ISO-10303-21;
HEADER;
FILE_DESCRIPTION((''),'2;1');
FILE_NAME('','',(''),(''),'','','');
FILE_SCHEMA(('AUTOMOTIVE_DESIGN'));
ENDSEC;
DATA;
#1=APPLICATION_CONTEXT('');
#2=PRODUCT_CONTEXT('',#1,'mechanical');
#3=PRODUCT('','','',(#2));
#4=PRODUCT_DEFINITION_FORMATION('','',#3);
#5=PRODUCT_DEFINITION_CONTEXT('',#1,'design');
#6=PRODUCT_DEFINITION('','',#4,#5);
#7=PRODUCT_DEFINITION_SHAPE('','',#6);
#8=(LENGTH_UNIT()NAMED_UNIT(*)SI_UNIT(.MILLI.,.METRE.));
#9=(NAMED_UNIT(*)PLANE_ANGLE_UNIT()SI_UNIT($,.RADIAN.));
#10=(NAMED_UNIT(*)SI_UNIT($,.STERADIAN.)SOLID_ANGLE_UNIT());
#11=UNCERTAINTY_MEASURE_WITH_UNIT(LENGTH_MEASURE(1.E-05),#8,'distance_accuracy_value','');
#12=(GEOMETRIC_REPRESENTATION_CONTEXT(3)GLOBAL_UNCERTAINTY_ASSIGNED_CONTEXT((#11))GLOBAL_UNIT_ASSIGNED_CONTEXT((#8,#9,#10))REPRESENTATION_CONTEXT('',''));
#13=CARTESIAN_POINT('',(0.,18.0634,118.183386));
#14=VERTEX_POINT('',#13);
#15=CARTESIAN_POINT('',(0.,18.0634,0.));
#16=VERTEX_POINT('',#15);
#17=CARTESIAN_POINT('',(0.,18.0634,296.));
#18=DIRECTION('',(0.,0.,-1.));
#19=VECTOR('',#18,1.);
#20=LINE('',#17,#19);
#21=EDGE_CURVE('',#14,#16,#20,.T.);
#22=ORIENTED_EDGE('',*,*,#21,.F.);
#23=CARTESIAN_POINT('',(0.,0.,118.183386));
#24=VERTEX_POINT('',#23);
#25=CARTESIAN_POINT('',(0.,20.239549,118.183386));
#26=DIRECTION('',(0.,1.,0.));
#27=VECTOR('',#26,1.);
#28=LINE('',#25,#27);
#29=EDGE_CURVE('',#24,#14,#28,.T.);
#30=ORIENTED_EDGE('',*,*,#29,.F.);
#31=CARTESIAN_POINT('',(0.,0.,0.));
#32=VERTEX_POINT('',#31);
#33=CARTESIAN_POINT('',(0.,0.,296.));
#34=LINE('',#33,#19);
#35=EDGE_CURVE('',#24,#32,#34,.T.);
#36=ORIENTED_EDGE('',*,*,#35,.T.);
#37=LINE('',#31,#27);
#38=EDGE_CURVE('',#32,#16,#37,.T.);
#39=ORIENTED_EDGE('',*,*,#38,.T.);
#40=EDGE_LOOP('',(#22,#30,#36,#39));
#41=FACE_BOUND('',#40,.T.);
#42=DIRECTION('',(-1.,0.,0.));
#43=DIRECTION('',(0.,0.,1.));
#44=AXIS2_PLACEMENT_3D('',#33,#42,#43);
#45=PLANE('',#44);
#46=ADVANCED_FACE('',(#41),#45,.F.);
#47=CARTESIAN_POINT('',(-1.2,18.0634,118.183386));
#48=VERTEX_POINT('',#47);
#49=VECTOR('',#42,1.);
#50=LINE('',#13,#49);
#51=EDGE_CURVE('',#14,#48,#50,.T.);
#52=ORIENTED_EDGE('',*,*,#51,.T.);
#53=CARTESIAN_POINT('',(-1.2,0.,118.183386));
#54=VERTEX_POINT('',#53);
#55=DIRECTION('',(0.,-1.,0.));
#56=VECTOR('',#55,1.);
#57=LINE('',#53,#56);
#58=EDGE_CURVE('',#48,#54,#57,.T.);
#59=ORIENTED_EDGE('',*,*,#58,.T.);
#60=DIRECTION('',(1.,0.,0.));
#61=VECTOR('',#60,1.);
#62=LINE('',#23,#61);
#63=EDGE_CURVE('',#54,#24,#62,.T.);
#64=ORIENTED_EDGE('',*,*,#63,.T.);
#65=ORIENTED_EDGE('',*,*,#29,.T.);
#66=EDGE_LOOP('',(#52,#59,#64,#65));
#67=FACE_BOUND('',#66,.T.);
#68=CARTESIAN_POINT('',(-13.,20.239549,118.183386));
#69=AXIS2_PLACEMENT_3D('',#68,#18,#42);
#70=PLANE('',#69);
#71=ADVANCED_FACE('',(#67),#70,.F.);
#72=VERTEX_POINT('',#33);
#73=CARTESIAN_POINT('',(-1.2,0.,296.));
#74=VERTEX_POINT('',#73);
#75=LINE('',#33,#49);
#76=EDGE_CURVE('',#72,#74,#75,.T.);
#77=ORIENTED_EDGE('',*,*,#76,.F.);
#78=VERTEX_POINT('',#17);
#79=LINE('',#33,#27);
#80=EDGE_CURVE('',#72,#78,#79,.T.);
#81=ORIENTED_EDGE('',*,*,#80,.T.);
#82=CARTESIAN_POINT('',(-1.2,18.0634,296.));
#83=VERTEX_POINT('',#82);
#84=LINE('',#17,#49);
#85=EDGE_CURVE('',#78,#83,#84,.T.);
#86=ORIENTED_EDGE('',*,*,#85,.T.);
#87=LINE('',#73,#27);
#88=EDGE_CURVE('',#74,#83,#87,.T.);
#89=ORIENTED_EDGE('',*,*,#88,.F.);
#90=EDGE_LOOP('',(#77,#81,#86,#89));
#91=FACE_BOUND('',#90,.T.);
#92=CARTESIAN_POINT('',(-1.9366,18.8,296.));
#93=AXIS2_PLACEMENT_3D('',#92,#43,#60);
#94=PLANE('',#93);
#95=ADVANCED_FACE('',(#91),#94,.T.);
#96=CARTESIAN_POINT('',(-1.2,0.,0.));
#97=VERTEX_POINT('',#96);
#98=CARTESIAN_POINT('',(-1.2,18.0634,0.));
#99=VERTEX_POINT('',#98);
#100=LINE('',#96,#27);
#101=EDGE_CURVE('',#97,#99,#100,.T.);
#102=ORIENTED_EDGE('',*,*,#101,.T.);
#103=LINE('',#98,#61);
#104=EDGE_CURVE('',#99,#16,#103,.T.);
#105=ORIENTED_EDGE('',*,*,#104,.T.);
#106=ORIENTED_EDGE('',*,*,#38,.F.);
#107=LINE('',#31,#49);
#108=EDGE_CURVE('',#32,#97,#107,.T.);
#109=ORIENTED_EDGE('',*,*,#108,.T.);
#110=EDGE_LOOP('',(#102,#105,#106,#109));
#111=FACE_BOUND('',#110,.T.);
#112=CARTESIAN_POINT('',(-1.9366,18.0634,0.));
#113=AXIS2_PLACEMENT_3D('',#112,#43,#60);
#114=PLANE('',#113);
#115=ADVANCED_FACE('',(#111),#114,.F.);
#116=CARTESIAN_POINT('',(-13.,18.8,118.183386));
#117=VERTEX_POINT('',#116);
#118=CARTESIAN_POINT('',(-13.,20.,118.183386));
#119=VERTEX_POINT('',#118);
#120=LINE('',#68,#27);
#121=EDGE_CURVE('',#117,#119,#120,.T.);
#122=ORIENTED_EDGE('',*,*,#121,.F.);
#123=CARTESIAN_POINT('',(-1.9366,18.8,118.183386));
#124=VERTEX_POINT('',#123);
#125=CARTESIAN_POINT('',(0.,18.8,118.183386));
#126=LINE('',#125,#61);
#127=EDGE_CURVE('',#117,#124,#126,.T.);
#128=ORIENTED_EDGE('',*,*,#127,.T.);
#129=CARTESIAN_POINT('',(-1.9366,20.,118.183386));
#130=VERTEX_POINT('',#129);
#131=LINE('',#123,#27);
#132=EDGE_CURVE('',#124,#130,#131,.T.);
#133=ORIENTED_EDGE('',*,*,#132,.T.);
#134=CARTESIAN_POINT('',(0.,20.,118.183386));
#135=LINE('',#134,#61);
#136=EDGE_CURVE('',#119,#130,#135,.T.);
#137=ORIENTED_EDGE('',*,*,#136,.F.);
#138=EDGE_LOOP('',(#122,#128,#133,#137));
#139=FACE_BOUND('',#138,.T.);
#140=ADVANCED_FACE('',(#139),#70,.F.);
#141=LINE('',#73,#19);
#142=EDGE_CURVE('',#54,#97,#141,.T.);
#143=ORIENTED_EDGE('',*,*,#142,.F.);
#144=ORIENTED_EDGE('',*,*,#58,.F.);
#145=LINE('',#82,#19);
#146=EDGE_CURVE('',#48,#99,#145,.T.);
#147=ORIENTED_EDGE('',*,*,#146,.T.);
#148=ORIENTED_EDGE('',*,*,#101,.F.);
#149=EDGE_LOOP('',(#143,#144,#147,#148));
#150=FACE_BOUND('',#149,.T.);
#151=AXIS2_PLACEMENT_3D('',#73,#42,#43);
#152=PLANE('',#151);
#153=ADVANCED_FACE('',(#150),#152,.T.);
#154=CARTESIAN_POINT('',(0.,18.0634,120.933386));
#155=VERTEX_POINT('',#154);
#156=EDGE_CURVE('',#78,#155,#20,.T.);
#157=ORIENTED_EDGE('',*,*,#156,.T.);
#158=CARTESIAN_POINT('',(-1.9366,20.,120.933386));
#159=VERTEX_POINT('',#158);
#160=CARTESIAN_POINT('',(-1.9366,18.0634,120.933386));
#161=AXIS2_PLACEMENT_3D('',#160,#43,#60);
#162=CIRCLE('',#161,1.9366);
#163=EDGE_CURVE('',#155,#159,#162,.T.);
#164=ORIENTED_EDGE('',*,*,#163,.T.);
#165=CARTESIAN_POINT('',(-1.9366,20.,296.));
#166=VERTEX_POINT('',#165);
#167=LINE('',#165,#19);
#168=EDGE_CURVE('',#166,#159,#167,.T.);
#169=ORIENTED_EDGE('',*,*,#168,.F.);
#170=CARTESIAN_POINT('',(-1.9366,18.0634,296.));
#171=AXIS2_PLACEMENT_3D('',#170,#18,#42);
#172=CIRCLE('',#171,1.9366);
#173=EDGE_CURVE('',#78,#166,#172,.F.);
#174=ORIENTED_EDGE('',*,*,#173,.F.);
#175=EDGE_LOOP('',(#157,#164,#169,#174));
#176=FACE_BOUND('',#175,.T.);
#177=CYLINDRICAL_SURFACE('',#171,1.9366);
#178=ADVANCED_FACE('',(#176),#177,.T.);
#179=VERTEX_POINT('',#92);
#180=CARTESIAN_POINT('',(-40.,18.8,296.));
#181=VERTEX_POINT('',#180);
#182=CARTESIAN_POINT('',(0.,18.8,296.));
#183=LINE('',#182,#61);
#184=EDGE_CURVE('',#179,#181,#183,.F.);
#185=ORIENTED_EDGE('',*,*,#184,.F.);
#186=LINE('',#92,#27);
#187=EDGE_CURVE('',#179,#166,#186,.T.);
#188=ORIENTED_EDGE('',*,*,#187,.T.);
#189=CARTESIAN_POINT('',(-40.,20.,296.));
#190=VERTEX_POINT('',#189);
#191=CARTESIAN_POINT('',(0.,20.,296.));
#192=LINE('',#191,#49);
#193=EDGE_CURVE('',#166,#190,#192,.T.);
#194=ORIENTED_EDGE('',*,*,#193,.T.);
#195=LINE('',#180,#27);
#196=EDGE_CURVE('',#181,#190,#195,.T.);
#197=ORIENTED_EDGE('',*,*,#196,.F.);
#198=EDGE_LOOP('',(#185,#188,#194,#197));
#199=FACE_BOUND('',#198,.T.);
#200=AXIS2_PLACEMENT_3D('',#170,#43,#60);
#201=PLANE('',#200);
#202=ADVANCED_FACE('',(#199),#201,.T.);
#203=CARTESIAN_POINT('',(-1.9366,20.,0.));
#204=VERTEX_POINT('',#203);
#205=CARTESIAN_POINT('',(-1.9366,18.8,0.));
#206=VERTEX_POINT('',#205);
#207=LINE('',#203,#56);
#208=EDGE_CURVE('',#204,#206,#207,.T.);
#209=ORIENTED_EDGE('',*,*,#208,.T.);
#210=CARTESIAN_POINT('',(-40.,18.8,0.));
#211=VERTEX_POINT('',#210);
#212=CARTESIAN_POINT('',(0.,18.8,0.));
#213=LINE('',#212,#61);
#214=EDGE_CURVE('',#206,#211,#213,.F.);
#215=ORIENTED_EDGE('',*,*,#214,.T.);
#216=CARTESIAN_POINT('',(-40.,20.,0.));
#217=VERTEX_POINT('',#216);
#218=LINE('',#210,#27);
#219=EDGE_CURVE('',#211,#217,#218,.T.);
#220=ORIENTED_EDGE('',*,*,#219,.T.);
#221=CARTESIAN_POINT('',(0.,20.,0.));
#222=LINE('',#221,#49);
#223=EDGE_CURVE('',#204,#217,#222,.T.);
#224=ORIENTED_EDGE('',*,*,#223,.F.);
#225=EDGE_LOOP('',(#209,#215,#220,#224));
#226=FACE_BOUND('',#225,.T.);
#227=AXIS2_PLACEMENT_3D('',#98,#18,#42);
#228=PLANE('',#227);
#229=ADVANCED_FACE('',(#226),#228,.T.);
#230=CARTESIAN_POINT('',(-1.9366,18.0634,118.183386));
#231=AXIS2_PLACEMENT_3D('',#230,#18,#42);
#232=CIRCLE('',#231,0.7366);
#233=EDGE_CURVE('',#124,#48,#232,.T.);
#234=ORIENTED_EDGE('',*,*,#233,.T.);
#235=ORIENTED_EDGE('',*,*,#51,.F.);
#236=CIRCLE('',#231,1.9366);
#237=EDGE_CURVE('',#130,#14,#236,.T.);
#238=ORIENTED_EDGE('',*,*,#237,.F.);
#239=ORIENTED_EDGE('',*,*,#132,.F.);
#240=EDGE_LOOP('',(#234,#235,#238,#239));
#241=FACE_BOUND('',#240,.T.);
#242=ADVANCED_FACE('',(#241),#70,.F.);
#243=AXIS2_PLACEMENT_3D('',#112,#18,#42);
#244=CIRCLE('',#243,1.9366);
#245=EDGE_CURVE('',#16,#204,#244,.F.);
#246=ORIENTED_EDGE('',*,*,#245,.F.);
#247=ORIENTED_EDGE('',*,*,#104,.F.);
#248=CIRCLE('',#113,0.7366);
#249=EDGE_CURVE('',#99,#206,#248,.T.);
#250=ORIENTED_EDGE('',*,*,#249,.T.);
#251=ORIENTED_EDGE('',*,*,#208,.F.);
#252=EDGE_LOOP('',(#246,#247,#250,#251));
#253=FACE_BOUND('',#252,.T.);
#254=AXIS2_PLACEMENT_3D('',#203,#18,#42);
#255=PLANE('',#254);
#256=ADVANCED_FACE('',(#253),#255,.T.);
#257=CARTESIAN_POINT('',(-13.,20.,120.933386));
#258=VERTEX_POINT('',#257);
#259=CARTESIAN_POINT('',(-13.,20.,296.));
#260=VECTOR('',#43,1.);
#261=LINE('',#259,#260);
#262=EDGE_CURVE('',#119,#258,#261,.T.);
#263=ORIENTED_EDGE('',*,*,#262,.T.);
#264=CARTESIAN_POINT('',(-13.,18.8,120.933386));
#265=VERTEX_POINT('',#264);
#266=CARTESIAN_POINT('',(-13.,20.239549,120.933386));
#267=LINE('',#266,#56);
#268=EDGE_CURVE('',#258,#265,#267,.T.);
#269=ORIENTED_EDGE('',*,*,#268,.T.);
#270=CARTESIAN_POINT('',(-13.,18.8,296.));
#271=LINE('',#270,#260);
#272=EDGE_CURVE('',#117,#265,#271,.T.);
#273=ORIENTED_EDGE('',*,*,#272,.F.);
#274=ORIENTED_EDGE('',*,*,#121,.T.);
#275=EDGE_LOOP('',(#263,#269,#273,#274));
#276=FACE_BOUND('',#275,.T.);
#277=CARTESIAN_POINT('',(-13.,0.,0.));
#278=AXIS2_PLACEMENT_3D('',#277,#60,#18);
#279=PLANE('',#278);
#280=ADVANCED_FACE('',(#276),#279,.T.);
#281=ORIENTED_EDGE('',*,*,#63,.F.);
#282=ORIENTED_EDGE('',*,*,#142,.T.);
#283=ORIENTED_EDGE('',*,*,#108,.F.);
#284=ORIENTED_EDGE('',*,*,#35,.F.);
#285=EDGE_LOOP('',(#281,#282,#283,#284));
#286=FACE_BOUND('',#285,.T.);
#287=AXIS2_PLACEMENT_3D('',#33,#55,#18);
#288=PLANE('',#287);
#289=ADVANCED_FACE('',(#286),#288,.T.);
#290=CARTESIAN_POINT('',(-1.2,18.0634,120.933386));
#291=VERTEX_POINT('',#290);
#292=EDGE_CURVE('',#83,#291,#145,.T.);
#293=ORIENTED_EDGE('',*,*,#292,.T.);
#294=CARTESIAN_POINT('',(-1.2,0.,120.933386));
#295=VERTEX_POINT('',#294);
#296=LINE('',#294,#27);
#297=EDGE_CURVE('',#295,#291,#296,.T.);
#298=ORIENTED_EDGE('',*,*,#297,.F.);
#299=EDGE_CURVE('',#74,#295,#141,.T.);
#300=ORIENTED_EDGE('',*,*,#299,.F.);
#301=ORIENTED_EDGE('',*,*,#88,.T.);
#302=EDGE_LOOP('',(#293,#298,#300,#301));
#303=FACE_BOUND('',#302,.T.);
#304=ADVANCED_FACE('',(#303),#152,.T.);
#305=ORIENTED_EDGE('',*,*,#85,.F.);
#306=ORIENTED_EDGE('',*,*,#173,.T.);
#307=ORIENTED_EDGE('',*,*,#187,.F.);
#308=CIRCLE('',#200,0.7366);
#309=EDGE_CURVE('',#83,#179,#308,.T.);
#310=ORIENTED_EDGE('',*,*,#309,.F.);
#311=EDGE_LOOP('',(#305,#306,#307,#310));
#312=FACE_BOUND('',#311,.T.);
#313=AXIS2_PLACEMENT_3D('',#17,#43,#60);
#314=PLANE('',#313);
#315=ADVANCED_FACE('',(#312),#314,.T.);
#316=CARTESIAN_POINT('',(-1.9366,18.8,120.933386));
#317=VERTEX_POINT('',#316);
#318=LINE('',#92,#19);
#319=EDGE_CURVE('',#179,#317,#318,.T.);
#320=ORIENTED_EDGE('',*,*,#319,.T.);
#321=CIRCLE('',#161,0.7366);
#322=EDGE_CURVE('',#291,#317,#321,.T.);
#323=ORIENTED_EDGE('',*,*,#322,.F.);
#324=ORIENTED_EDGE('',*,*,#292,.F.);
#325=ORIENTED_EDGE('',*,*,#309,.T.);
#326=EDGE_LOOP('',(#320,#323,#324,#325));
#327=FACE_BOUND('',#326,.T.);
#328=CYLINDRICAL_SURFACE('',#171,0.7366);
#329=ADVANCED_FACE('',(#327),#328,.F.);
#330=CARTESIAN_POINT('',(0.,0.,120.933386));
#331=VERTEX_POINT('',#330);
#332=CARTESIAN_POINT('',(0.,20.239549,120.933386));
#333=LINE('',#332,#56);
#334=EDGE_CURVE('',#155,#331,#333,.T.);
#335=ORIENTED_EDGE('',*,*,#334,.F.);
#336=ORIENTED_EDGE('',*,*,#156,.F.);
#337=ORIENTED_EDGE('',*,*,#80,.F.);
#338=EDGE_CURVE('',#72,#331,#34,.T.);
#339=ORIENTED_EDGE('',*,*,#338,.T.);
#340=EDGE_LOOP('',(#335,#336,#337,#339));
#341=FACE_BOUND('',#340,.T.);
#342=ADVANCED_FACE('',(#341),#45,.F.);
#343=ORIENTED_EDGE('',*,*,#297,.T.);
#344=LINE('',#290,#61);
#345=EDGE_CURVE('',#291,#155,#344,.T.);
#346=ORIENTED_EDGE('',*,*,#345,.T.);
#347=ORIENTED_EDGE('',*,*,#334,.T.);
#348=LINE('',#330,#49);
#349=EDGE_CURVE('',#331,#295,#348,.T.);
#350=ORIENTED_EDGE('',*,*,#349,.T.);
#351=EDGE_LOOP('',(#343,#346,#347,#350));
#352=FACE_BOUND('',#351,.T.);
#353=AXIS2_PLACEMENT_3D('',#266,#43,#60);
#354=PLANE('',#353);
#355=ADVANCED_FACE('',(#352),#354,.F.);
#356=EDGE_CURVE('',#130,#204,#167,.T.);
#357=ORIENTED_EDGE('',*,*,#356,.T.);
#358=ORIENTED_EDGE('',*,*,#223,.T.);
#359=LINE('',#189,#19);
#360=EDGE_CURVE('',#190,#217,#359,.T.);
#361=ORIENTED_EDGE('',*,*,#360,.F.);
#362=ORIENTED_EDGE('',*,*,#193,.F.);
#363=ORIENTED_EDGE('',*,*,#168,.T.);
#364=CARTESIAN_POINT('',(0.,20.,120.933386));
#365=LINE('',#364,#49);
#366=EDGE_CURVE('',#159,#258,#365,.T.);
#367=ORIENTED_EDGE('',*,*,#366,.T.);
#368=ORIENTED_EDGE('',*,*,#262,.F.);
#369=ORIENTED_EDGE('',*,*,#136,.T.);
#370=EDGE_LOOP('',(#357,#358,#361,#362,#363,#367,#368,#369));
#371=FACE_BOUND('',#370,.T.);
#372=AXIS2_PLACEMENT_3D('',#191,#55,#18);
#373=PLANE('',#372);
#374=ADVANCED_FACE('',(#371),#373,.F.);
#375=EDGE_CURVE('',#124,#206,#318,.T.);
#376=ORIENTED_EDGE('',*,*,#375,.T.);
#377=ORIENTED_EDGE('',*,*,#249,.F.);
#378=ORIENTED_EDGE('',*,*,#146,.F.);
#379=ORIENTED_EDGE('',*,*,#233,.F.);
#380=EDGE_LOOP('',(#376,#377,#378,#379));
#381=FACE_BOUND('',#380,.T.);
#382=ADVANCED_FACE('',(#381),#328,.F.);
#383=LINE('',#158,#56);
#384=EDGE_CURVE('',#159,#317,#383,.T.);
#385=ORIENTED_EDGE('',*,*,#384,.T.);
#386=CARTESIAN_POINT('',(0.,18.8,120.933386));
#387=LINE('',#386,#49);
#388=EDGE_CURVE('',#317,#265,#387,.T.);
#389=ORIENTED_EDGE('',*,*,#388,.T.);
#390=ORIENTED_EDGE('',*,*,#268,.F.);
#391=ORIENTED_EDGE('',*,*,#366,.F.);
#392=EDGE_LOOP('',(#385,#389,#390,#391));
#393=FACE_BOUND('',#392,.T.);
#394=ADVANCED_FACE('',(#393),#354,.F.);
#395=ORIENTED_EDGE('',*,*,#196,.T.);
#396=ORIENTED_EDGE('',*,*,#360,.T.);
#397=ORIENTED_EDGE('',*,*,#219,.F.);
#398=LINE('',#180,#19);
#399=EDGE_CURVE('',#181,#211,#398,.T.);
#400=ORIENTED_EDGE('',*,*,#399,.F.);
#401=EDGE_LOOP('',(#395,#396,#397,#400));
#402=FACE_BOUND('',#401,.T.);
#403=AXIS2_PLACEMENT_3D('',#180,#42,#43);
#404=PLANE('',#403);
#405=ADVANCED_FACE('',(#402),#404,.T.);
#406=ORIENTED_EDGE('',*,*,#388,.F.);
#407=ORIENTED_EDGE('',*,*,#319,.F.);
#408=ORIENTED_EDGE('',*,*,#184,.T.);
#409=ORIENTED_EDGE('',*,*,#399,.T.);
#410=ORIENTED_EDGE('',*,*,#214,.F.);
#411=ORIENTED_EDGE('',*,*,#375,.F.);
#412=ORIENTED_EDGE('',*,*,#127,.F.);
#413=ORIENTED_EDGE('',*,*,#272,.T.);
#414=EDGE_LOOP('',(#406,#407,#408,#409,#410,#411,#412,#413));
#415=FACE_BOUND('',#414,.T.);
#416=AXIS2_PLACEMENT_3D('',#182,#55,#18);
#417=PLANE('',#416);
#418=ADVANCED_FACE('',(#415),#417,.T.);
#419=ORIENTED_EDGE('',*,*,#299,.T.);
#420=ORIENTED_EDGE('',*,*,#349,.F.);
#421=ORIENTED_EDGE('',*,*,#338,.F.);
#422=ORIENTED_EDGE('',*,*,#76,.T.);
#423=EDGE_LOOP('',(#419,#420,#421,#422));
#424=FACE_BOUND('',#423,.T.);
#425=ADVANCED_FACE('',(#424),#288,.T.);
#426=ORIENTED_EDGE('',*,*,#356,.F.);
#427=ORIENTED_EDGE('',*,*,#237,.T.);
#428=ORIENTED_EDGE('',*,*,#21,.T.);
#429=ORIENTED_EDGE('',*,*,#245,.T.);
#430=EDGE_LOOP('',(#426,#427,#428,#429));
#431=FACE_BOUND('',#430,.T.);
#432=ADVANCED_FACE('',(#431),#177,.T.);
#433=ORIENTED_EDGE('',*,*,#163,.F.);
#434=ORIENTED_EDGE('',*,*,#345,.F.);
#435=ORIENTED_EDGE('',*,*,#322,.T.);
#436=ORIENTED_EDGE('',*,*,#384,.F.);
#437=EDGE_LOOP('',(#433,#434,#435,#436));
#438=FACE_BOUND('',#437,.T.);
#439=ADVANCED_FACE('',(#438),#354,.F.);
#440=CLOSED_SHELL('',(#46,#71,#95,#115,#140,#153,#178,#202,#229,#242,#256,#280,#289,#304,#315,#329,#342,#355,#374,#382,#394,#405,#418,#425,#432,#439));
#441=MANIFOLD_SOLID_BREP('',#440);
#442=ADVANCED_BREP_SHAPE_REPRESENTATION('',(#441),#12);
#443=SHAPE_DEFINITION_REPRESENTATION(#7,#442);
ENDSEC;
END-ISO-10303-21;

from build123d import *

# Parameters (mm, degrees)
BASE_FLANGE1_DEPTH = 296
SKETCH2_W          = 2.75
SKETCH2_H          = 20.5
CUT_EXTRUDE1_DEPTH = 13


# Sheet-metal steps are written as plain solids
with BuildPart() as part:
    # Sketch1 → Base-Flange1 (new body)
    with BuildSketch(Plane.XY):
        with BuildLine():
            Line((0, 0), (0, 18.0634))
            ThreePointArc((0, 18.0634), (-0.567217008, 19.432782992), (-1.9366, 20))
            Line((-1.9366, 20), (-40, 20))
            Line((-40, 20), (-40, 18.8))
            Line((-40, 18.8), (-1.9366, 18.8))
            ThreePointArc((-1.9366, 18.8), (-1.415745145, 18.584254855), (-1.2, 18.0634))
            Line((-1.2, 18.0634), (-1.2, 0))
            Line((-1.2, 0), (0, 0))
        make_face()
    extrude(amount=BASE_FLANGE1_DEPTH)

    # Sketch2 → Cut-Extrude1 (cut)
    with BuildSketch(Plane(origin=(0, 0, 0), x_dir=(0, 0, -1), z_dir=(1, 0, 0))):
        with Locations((-119.558385949, 9.989549108)):
            Rectangle(SKETCH2_W, SKETCH2_H)
    extrude(amount=-CUT_EXTRUDE1_DEPTH, mode=Mode.SUBTRACT)


solid = part.part
